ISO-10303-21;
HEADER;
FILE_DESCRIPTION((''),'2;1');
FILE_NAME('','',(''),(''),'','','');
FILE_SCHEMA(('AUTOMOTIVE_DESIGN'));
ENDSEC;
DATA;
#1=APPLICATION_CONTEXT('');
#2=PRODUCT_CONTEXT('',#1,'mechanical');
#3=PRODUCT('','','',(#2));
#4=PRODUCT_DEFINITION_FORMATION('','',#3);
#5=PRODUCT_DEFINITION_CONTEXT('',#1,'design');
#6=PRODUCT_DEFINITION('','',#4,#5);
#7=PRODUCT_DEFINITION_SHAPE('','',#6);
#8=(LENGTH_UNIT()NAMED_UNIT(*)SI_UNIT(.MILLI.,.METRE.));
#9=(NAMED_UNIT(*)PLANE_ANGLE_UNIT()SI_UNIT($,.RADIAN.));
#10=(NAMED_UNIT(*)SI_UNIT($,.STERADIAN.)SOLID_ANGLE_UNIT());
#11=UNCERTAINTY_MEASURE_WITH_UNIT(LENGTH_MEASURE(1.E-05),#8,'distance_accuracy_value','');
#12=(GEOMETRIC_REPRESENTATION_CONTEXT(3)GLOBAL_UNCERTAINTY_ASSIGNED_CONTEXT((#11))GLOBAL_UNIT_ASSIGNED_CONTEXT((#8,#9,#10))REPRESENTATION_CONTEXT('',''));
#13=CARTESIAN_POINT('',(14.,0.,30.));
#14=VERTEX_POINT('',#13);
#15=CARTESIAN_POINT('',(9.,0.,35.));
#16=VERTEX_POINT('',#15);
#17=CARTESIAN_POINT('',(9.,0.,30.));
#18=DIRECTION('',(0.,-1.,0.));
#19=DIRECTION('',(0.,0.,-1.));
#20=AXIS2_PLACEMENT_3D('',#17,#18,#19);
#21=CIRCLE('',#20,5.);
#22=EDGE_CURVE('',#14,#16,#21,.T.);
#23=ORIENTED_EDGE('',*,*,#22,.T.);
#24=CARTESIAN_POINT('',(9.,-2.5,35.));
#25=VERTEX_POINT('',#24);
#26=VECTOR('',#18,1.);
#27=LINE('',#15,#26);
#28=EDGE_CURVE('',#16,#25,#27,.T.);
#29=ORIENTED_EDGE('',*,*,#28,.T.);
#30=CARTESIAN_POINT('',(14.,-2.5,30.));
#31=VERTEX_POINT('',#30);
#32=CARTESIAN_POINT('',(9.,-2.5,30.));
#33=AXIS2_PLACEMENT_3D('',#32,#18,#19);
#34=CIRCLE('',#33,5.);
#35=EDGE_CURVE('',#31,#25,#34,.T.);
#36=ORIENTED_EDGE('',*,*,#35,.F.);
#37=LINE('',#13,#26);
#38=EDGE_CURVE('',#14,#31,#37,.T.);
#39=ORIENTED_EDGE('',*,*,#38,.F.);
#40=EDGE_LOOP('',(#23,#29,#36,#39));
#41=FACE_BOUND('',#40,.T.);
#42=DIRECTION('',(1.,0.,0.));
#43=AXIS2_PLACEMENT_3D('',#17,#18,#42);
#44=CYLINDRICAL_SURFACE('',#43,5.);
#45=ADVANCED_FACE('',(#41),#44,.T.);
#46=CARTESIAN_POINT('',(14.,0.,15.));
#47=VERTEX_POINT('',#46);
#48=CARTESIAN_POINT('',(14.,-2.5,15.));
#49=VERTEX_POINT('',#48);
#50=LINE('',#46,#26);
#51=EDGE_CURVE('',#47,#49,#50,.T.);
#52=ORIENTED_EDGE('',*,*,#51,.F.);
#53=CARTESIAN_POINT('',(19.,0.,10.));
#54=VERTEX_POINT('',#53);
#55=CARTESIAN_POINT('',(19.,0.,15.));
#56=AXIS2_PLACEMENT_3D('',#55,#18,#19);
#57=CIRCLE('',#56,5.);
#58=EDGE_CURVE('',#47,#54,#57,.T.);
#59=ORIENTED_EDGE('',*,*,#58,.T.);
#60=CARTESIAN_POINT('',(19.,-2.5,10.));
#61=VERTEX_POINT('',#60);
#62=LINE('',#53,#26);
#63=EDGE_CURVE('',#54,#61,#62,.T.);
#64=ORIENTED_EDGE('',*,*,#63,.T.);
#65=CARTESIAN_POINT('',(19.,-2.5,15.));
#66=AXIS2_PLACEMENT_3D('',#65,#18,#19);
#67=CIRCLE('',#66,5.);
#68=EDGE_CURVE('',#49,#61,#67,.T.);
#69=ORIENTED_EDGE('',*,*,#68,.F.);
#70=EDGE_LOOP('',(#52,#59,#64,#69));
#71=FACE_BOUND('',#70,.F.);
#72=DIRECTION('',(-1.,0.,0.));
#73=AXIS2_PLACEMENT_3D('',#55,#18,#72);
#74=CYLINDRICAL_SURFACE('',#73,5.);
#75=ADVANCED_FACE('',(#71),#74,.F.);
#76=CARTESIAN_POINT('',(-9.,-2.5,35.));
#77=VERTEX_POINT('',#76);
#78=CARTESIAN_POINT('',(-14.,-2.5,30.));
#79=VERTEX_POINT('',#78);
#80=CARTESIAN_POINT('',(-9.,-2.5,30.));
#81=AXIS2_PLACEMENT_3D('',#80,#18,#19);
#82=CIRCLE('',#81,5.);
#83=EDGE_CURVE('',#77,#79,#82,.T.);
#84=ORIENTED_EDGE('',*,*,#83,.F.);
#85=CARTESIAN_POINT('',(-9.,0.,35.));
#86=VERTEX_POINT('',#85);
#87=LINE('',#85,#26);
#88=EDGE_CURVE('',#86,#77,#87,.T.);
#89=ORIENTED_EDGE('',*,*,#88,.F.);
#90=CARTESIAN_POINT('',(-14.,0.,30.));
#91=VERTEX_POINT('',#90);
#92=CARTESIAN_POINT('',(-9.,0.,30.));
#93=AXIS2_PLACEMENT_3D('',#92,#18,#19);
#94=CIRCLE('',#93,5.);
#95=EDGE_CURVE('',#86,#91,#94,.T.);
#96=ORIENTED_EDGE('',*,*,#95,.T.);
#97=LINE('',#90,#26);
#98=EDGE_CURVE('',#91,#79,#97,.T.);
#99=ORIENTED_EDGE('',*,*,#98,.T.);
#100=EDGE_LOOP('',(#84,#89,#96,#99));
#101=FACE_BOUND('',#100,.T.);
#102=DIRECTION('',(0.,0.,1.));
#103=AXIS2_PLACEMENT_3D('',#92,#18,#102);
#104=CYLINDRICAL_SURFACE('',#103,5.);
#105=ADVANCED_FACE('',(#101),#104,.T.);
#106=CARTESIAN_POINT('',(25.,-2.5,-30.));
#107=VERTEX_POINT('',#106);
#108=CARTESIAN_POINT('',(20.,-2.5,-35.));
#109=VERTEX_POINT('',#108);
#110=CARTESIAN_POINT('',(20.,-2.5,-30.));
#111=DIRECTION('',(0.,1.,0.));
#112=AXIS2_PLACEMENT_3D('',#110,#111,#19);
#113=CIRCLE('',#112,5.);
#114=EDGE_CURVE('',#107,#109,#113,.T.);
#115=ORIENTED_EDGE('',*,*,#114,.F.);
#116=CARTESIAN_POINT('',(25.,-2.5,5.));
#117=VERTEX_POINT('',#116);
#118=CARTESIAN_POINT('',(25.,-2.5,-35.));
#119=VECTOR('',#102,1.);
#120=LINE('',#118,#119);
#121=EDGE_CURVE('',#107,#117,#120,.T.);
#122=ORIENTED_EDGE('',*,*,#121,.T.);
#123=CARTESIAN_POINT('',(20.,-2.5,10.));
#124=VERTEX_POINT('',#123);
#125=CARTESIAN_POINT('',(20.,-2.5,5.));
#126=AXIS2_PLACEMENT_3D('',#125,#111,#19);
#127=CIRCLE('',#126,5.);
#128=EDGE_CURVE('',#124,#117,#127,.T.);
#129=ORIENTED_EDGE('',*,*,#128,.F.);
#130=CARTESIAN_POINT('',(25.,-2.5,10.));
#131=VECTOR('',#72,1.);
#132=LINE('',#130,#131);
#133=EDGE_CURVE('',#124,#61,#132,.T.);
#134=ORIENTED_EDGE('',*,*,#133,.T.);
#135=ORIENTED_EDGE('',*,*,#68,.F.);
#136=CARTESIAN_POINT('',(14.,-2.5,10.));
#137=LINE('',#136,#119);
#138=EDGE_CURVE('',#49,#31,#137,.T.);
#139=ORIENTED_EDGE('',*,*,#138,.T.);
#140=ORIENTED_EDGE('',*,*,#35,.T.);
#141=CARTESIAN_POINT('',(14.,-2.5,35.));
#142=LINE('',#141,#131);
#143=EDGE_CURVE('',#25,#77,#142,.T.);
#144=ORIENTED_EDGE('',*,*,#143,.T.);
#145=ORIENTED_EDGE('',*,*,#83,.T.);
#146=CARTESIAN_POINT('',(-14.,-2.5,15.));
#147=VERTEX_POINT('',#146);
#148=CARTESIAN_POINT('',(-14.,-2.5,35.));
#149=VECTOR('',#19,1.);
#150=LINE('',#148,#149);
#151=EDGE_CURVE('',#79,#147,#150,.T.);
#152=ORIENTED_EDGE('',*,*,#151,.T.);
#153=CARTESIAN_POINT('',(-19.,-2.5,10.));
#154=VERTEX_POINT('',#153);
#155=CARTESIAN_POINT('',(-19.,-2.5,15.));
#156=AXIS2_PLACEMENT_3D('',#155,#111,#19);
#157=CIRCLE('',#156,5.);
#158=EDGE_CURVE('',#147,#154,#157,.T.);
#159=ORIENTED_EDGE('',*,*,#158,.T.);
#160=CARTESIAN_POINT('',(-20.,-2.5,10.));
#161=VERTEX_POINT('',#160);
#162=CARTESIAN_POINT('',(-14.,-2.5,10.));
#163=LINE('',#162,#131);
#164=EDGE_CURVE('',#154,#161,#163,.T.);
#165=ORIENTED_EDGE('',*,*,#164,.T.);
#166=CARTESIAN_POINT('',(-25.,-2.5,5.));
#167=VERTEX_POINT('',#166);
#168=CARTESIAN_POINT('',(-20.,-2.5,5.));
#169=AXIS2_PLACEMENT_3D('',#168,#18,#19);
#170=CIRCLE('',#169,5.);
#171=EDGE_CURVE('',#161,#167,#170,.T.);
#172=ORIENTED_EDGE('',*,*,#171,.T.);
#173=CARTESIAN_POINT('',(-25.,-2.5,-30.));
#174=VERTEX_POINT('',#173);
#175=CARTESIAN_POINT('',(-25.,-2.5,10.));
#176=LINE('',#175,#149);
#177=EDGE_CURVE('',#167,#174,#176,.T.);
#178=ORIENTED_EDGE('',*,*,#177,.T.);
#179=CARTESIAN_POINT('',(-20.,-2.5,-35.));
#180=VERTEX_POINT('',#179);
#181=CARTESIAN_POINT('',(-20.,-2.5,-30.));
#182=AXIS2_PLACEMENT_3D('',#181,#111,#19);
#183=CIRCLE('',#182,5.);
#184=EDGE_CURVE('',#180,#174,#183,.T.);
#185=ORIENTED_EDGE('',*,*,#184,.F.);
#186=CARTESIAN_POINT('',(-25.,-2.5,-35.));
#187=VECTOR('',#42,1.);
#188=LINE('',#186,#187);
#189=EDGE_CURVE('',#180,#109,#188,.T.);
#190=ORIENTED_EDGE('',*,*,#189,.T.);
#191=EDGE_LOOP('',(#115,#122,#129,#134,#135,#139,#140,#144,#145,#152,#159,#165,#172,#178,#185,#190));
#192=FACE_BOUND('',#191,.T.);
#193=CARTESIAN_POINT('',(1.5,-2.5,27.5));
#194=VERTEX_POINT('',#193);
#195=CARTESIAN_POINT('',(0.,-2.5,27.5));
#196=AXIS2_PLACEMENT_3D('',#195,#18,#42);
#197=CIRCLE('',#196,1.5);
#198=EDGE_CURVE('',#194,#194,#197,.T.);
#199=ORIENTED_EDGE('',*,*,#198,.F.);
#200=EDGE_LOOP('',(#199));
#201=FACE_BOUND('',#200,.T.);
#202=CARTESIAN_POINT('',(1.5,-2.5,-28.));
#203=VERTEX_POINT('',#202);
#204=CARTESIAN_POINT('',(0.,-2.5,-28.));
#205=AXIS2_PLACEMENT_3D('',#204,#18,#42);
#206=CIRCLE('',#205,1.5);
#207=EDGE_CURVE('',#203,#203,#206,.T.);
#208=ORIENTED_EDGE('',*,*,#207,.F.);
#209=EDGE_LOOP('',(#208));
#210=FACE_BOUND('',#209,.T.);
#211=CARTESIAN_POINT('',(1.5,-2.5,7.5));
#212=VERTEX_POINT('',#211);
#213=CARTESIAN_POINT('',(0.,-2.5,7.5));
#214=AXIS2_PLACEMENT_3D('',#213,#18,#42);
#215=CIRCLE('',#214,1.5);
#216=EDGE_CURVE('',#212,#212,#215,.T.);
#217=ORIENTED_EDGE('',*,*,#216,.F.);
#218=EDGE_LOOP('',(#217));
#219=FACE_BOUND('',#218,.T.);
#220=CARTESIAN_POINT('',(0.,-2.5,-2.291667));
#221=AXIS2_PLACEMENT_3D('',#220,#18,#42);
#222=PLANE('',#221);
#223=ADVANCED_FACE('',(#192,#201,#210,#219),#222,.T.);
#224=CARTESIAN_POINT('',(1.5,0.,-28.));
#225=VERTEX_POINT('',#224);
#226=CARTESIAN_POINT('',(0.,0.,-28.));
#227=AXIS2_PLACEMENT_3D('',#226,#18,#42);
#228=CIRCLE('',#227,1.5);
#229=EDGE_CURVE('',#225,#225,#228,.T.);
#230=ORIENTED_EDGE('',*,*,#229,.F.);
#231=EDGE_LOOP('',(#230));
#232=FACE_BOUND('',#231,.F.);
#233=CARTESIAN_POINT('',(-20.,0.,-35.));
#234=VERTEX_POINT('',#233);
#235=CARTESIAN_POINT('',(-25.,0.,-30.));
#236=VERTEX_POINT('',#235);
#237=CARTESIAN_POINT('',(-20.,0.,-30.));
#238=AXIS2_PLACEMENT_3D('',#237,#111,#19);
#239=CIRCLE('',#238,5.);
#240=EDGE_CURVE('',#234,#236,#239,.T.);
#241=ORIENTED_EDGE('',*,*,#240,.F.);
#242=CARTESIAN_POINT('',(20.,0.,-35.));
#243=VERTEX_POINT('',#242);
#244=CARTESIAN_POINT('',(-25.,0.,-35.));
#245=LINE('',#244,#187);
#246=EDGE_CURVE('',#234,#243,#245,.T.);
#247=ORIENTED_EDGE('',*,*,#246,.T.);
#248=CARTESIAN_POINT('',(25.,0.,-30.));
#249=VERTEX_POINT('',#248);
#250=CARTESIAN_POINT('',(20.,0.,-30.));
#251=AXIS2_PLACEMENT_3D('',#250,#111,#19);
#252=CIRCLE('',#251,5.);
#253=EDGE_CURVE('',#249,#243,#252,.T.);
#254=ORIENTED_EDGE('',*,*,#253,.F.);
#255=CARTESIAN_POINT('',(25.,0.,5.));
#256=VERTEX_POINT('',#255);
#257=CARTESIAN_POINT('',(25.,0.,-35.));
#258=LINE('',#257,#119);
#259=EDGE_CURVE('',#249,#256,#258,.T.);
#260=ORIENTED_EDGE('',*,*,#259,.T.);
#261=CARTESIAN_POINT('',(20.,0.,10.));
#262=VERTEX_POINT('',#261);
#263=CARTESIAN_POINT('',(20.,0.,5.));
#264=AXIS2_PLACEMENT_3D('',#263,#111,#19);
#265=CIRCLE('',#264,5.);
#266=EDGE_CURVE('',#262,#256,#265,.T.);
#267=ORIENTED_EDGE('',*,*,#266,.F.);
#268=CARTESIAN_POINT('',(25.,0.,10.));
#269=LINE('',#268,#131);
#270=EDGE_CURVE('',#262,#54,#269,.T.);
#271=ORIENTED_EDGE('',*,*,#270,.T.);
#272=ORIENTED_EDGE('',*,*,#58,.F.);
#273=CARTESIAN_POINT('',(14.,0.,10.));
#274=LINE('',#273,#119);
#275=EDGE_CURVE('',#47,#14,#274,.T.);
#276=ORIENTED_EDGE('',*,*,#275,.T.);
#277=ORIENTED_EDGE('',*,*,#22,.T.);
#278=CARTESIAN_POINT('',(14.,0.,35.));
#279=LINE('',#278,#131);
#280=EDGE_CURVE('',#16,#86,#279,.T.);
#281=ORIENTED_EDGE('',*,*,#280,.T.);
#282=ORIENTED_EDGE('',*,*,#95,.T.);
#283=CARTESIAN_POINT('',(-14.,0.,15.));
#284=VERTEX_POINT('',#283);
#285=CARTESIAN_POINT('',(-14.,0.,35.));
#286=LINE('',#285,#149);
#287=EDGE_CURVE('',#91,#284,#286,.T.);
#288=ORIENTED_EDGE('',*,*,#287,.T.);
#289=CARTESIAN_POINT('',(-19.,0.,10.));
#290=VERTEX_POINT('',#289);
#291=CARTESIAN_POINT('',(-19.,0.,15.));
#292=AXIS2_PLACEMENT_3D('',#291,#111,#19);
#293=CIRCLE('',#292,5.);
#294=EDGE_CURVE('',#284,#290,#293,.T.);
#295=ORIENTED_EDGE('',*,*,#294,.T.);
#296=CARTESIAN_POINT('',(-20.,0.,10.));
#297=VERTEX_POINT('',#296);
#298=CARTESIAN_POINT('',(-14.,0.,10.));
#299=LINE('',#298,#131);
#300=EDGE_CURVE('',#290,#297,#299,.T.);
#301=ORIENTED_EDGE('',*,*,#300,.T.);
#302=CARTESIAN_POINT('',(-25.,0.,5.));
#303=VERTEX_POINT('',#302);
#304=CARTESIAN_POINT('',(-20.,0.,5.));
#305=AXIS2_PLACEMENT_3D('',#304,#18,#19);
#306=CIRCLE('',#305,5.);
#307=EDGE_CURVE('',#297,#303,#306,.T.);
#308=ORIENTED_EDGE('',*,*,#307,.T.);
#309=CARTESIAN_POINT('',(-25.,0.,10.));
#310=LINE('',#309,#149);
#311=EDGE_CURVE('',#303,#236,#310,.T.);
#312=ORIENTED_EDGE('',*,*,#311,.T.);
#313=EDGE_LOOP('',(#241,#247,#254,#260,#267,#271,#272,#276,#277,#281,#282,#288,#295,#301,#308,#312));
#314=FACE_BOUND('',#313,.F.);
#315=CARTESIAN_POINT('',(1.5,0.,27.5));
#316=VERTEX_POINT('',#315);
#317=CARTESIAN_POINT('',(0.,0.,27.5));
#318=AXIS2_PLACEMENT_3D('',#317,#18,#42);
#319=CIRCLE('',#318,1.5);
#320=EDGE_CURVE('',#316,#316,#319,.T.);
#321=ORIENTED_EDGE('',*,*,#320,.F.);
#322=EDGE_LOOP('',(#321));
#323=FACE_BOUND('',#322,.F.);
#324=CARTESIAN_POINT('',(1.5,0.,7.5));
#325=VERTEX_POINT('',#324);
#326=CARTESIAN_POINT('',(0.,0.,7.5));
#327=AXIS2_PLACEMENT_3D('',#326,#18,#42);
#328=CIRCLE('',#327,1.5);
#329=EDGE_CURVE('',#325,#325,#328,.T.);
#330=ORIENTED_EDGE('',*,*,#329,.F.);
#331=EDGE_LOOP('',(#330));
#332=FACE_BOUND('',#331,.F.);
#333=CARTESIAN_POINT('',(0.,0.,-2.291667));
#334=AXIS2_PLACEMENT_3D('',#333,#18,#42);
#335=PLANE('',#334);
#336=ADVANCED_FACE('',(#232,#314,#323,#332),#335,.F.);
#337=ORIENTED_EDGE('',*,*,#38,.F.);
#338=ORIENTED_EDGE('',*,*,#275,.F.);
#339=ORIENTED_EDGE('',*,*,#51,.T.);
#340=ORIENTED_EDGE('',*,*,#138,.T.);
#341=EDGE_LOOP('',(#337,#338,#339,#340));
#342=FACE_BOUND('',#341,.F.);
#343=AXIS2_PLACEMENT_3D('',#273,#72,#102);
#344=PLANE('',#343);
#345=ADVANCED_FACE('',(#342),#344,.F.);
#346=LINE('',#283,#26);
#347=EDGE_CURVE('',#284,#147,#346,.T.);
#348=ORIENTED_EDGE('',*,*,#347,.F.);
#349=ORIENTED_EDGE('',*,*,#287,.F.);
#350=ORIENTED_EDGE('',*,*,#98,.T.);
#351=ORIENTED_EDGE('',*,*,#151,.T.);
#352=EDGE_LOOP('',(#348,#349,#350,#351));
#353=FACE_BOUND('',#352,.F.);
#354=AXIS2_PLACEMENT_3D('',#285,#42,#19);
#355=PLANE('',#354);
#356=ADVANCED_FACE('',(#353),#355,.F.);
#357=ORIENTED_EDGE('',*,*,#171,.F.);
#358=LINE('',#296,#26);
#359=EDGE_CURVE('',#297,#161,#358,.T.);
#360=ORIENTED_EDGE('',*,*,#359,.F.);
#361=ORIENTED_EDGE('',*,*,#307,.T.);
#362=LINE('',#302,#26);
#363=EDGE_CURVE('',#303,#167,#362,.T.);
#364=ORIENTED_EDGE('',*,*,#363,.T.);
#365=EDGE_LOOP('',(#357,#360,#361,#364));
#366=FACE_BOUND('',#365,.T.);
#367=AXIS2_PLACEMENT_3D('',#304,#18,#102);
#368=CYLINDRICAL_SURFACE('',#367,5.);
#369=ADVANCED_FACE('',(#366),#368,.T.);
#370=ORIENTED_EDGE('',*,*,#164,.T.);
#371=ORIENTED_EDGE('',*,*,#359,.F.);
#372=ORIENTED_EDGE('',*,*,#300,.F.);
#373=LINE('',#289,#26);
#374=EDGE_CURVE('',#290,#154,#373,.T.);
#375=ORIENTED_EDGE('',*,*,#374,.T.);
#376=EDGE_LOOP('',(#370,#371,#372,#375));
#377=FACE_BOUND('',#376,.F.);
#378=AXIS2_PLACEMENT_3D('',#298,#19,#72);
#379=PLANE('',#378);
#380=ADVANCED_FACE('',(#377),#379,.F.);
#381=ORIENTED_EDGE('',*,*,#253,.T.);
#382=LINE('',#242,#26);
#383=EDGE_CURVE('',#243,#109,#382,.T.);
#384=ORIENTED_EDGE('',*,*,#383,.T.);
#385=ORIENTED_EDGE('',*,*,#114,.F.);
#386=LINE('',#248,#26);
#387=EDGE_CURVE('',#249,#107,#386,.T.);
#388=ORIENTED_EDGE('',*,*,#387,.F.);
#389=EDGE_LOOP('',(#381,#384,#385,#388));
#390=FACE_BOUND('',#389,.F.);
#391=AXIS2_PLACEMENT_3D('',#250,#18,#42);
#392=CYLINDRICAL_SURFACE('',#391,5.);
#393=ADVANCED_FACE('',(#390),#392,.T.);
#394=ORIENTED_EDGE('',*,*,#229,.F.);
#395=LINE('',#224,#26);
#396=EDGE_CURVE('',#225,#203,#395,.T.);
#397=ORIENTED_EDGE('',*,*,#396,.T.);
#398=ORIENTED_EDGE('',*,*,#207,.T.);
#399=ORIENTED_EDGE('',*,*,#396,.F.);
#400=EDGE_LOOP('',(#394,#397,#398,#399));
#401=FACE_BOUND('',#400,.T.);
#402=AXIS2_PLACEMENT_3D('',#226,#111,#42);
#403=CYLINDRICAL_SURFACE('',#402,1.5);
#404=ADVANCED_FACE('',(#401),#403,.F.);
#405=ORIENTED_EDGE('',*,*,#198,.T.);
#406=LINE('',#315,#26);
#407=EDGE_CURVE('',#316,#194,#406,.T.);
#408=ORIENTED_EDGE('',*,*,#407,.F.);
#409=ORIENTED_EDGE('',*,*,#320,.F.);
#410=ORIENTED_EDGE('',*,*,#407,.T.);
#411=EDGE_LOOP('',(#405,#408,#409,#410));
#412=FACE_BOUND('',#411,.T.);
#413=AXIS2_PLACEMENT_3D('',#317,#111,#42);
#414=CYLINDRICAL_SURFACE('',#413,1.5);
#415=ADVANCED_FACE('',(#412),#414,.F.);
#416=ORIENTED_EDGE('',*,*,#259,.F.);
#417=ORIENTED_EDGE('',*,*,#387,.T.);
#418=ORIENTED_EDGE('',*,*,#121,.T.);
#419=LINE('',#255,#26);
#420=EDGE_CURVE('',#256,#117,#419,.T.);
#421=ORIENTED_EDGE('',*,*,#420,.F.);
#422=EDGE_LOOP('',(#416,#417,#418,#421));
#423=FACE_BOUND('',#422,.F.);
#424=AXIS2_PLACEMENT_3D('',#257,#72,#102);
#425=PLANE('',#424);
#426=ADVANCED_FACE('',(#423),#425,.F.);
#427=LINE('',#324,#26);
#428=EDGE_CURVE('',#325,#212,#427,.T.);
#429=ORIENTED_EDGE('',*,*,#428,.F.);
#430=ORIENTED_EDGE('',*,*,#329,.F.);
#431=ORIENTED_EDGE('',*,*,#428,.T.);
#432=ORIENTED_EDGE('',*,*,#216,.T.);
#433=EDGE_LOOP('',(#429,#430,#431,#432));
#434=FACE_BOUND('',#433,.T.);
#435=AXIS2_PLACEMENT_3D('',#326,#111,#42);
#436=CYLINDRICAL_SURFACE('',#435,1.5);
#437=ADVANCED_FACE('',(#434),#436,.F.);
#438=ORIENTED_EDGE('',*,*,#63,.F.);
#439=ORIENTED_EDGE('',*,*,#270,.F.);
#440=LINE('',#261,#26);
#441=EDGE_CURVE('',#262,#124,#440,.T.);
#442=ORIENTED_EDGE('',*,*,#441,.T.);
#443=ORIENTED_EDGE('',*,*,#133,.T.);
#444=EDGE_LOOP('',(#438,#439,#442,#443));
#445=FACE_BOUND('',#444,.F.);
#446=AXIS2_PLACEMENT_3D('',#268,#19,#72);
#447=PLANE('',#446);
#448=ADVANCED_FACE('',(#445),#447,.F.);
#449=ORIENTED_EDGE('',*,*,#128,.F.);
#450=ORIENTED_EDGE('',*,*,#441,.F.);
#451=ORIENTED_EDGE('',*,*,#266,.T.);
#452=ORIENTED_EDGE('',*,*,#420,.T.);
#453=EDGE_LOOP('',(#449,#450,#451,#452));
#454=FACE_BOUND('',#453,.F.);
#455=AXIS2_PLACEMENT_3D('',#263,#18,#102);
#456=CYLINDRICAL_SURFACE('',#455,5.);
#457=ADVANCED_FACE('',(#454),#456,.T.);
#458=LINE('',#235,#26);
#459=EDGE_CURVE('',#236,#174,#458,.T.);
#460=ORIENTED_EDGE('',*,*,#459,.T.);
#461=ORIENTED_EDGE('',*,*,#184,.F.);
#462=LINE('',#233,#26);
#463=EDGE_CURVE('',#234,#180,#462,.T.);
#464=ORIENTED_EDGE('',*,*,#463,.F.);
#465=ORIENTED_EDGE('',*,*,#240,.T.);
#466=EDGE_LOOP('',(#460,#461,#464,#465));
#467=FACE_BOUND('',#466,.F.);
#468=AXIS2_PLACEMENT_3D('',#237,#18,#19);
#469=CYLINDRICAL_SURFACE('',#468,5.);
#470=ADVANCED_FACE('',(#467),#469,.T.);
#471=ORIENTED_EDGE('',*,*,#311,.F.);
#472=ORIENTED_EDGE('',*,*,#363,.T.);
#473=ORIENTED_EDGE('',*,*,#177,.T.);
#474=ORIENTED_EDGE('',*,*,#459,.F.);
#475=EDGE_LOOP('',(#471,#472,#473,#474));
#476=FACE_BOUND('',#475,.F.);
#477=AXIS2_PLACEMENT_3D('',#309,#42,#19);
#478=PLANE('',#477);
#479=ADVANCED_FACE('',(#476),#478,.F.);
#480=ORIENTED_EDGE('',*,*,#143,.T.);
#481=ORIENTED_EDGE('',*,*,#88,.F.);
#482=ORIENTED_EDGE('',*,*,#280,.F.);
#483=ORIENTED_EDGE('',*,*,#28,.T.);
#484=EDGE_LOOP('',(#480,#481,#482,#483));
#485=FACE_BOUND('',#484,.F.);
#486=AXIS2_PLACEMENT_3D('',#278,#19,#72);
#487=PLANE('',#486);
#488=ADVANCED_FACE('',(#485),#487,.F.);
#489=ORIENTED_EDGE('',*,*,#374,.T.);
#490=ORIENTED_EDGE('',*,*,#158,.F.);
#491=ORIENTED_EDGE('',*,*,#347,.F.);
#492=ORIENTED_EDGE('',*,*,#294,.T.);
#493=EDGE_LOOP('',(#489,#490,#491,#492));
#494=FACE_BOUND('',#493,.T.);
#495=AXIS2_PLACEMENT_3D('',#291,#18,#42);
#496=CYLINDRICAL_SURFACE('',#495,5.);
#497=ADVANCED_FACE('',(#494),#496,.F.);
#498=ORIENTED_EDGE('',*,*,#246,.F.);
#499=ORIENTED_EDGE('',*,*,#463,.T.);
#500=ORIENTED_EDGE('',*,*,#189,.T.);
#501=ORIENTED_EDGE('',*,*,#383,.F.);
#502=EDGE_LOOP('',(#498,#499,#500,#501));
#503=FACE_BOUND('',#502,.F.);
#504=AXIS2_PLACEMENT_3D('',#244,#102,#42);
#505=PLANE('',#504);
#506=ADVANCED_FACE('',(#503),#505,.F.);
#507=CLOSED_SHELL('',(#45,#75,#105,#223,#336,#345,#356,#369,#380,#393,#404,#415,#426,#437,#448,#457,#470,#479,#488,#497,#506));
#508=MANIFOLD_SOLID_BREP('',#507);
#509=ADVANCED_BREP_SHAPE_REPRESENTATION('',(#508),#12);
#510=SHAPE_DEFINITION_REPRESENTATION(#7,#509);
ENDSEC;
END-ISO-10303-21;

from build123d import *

# Parameters (mm, degrees)
F0_R     = 1.5
F1_DEPTH = 2.5
F2_R     = 5


with BuildPart() as f1:
    # F0 (on Front) → F1 (new body)
    with BuildSketch(Plane.XZ):
        Polygon((14, 10), (14, 35), (-14, 35), (-14, 10), (-25, 10), (-25, -35), (25, -35), (25, 10), align=None)
        with Locations((0, -28)):
            Circle(F0_R, mode=Mode.SUBTRACT)
        with Locations((0, 7.5)):
            Circle(F0_R, mode=Mode.SUBTRACT)
        with Locations((0, 27.5)):
            Circle(F0_R, mode=Mode.SUBTRACT)
    extrude(amount=F1_DEPTH)

    # F2
    f2_edges = [f1.edges().sort_by_distance(p)[0] for p in [
        (-14, -1.25, 10),
        (-25, -1.25, 10),
        (14, -1.25, 10),
        (25, -1.25, 10),
        (-25, -1.25, -35),
        (25, -1.25, -35),
        (14, -1.25, 35),
        (-14, -1.25, 35),
    ]]
    fillet(f2_edges, radius=F2_R)


solid = f1.part
